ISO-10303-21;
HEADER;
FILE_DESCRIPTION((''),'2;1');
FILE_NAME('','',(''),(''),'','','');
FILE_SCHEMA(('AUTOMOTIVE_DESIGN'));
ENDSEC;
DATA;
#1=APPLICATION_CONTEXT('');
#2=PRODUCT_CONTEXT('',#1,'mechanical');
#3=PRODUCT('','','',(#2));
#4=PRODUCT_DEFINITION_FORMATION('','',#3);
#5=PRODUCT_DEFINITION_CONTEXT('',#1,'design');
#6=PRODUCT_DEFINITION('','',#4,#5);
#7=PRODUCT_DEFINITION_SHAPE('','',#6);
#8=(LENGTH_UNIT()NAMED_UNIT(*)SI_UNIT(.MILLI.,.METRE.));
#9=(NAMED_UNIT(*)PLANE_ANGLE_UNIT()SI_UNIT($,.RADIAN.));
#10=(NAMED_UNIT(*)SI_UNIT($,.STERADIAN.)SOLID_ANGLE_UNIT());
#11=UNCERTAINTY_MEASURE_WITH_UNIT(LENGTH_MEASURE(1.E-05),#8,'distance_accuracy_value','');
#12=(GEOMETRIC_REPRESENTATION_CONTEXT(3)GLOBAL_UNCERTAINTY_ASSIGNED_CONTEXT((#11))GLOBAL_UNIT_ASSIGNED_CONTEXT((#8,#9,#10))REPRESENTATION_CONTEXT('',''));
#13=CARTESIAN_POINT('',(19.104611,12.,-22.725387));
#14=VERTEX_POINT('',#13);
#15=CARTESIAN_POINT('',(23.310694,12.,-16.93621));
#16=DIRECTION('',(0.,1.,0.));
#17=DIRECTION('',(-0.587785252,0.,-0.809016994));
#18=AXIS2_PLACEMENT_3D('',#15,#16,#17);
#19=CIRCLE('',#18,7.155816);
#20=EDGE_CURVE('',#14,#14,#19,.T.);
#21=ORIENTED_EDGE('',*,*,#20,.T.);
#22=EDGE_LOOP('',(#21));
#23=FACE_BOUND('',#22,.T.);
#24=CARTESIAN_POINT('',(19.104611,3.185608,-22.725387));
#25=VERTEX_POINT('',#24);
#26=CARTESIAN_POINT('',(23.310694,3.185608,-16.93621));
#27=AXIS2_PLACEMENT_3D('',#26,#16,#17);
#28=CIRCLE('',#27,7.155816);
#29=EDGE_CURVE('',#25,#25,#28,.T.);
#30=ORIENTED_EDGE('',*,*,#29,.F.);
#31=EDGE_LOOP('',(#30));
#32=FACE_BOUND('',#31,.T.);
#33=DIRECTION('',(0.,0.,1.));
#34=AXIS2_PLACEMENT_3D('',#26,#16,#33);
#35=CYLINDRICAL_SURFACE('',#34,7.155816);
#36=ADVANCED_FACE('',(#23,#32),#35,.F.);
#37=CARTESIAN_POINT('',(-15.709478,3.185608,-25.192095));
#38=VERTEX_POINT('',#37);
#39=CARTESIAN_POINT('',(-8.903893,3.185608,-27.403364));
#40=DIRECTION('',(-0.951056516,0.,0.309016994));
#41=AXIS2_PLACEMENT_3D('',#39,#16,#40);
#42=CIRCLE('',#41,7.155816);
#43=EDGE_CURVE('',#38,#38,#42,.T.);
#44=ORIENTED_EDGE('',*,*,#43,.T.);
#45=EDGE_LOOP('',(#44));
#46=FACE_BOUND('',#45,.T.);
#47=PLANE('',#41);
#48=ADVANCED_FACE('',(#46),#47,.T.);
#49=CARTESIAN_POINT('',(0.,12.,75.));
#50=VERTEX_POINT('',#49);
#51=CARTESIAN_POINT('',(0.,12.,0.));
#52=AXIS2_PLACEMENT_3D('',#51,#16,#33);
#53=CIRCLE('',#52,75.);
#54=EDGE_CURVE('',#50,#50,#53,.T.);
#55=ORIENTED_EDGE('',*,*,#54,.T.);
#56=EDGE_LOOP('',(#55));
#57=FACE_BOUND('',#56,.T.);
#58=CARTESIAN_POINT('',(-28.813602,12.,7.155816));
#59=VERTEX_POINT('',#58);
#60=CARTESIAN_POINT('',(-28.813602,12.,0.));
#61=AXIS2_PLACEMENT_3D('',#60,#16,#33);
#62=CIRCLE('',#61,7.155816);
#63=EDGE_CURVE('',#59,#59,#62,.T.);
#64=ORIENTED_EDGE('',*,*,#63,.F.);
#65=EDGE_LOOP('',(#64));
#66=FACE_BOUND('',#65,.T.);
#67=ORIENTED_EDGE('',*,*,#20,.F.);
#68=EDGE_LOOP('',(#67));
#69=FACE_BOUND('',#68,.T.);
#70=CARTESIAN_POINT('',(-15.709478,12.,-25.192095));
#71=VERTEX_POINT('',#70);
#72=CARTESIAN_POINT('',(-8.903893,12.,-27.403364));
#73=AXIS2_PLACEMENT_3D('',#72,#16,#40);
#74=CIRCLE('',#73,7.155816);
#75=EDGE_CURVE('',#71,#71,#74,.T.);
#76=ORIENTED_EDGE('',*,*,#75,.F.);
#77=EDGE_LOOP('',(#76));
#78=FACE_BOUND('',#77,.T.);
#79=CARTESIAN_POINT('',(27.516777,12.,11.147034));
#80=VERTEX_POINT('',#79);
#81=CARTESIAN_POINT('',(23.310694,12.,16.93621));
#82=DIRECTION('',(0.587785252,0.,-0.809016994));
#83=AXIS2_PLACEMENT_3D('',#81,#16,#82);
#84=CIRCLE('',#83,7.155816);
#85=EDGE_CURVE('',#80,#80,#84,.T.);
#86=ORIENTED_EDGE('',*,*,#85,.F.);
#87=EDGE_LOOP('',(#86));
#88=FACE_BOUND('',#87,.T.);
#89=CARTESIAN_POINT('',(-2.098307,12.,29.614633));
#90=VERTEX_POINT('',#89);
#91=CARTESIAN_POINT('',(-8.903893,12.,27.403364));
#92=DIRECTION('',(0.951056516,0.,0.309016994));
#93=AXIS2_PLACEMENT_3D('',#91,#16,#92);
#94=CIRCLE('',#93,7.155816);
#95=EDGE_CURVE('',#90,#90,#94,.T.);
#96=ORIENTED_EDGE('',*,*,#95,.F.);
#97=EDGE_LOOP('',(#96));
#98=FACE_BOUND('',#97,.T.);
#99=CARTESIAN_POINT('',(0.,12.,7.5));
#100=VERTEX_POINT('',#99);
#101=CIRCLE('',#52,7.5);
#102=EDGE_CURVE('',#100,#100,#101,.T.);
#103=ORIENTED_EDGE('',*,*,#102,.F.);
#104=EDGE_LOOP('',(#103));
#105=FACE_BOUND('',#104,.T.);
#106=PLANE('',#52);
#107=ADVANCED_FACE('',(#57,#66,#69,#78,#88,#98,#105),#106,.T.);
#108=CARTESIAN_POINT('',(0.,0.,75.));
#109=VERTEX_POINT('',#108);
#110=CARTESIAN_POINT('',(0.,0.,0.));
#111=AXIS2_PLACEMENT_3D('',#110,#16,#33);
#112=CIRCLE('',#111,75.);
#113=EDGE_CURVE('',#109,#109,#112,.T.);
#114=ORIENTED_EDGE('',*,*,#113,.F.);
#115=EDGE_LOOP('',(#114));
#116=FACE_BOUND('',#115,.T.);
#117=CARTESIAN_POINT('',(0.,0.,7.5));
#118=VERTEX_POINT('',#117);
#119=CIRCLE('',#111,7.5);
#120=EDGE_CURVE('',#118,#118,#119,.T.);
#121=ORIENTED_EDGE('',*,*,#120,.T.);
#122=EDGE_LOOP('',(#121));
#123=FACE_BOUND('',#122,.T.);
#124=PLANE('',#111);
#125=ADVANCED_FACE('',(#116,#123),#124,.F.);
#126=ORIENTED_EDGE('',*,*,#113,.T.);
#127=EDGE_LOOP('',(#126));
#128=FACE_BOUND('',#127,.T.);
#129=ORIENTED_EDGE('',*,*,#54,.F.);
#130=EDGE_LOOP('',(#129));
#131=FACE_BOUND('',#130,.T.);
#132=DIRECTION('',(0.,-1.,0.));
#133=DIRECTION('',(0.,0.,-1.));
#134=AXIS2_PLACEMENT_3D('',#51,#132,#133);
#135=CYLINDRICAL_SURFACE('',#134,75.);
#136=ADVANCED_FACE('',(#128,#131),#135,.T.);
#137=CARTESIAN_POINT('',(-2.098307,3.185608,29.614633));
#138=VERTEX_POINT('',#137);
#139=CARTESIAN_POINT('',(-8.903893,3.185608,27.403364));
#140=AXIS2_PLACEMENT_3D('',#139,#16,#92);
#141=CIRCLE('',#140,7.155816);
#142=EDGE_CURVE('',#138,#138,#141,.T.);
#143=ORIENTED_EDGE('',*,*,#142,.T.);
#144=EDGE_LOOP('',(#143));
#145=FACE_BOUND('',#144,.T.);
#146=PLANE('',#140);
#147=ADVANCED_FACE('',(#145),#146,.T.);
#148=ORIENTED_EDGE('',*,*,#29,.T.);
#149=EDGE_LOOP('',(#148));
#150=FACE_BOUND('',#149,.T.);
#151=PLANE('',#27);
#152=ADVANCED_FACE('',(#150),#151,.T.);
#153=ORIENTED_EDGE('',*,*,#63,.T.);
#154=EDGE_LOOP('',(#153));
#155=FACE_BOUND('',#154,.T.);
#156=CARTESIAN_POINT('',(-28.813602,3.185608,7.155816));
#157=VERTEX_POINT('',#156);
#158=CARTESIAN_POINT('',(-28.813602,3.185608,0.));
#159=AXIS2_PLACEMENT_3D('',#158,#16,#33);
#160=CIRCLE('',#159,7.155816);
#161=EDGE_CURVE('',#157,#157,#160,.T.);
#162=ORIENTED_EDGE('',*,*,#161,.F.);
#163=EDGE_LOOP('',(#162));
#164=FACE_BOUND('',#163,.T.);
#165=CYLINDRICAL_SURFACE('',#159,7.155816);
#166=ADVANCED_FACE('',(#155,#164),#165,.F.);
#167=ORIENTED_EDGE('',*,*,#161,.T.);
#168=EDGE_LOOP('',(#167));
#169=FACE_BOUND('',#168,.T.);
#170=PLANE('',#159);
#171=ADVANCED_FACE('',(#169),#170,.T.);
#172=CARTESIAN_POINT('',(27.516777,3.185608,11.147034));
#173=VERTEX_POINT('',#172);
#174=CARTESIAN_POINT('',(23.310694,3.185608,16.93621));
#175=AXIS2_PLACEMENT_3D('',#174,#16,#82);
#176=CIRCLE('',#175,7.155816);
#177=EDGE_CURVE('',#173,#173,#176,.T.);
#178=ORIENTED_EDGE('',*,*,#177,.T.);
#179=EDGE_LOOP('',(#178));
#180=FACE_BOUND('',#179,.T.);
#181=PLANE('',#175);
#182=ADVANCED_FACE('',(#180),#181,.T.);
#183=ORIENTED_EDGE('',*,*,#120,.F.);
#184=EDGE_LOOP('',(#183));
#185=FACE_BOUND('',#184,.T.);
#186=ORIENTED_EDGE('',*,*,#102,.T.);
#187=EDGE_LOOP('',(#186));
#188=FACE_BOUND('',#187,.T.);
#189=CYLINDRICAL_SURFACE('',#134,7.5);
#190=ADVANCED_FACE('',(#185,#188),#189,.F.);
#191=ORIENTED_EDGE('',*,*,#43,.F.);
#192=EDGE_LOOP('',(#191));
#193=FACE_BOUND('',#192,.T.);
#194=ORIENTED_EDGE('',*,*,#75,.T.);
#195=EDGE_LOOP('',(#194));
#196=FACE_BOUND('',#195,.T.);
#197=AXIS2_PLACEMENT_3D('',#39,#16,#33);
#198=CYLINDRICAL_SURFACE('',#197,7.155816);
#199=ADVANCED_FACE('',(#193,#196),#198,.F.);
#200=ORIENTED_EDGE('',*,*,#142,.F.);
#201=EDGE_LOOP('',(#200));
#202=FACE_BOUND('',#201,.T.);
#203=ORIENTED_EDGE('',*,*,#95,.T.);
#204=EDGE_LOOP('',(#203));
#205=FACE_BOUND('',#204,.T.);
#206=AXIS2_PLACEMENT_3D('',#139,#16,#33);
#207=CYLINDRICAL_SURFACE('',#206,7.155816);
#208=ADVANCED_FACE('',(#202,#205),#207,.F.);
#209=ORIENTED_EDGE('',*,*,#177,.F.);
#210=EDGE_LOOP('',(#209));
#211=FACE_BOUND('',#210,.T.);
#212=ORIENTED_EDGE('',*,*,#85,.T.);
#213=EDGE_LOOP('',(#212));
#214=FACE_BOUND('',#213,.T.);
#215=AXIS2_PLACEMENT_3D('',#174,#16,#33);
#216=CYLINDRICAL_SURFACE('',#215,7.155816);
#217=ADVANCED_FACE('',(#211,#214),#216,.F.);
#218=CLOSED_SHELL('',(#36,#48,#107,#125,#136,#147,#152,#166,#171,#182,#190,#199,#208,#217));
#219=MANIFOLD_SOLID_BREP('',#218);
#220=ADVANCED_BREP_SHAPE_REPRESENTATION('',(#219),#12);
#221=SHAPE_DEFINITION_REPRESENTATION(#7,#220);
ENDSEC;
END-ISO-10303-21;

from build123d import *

# Parameters (mm, degrees)
SKETCH1_R           = 75
BOSS_EXTRUDE1_DEPTH = 12
SKETCH2_R           = 7.5
CUT_EXTRUDE1_DEPTH  = 107.742681248
SKETCH3_R           = 7.155815761
CUT_EXTRUDE2_DEPTH  = 8.814392398
CIRPATTERN1_COUNT   = 5


with BuildPart() as part:
    # Sketch1 → Boss-Extrude1 (new body)
    with BuildSketch(Plane(origin=(0, 0, 0), x_dir=(1, 0, 0), z_dir=(0, 1, 0))):
        Circle(SKETCH1_R)
    extrude(amount=BOSS_EXTRUDE1_DEPTH)

    # Sketch2 → Cut-Extrude1 (cut, through all)
    with BuildSketch(Plane(origin=(0, 0, 0), x_dir=(1, 0, 0), z_dir=(0, 1, 0))):
        Circle(SKETCH2_R)
    extrude(amount=CUT_EXTRUDE1_DEPTH, mode=Mode.SUBTRACT)

    # Sketch3 → Cut-Extrude2 (cut)
    with BuildSketch(Plane(origin=(0, 12, 0), x_dir=(1, 0, 0), z_dir=(0, 1, 0))):
        with Locations((-28.813602006, 0)):
            Circle(SKETCH3_R)
    cut_extrude2 = extrude(amount=-CUT_EXTRUDE2_DEPTH, mode=Mode.SUBTRACT)

    # CirPattern1: Cut-Extrude2 ×5 about axis
    cirpattern1_axis = Axis((0, 0, 0), (0, 1, 0))
    for i in range(1, CIRPATTERN1_COUNT):
        add(cut_extrude2.rotate(cirpattern1_axis, i * 360 / CIRPATTERN1_COUNT), mode=Mode.SUBTRACT)


solid = part.part
